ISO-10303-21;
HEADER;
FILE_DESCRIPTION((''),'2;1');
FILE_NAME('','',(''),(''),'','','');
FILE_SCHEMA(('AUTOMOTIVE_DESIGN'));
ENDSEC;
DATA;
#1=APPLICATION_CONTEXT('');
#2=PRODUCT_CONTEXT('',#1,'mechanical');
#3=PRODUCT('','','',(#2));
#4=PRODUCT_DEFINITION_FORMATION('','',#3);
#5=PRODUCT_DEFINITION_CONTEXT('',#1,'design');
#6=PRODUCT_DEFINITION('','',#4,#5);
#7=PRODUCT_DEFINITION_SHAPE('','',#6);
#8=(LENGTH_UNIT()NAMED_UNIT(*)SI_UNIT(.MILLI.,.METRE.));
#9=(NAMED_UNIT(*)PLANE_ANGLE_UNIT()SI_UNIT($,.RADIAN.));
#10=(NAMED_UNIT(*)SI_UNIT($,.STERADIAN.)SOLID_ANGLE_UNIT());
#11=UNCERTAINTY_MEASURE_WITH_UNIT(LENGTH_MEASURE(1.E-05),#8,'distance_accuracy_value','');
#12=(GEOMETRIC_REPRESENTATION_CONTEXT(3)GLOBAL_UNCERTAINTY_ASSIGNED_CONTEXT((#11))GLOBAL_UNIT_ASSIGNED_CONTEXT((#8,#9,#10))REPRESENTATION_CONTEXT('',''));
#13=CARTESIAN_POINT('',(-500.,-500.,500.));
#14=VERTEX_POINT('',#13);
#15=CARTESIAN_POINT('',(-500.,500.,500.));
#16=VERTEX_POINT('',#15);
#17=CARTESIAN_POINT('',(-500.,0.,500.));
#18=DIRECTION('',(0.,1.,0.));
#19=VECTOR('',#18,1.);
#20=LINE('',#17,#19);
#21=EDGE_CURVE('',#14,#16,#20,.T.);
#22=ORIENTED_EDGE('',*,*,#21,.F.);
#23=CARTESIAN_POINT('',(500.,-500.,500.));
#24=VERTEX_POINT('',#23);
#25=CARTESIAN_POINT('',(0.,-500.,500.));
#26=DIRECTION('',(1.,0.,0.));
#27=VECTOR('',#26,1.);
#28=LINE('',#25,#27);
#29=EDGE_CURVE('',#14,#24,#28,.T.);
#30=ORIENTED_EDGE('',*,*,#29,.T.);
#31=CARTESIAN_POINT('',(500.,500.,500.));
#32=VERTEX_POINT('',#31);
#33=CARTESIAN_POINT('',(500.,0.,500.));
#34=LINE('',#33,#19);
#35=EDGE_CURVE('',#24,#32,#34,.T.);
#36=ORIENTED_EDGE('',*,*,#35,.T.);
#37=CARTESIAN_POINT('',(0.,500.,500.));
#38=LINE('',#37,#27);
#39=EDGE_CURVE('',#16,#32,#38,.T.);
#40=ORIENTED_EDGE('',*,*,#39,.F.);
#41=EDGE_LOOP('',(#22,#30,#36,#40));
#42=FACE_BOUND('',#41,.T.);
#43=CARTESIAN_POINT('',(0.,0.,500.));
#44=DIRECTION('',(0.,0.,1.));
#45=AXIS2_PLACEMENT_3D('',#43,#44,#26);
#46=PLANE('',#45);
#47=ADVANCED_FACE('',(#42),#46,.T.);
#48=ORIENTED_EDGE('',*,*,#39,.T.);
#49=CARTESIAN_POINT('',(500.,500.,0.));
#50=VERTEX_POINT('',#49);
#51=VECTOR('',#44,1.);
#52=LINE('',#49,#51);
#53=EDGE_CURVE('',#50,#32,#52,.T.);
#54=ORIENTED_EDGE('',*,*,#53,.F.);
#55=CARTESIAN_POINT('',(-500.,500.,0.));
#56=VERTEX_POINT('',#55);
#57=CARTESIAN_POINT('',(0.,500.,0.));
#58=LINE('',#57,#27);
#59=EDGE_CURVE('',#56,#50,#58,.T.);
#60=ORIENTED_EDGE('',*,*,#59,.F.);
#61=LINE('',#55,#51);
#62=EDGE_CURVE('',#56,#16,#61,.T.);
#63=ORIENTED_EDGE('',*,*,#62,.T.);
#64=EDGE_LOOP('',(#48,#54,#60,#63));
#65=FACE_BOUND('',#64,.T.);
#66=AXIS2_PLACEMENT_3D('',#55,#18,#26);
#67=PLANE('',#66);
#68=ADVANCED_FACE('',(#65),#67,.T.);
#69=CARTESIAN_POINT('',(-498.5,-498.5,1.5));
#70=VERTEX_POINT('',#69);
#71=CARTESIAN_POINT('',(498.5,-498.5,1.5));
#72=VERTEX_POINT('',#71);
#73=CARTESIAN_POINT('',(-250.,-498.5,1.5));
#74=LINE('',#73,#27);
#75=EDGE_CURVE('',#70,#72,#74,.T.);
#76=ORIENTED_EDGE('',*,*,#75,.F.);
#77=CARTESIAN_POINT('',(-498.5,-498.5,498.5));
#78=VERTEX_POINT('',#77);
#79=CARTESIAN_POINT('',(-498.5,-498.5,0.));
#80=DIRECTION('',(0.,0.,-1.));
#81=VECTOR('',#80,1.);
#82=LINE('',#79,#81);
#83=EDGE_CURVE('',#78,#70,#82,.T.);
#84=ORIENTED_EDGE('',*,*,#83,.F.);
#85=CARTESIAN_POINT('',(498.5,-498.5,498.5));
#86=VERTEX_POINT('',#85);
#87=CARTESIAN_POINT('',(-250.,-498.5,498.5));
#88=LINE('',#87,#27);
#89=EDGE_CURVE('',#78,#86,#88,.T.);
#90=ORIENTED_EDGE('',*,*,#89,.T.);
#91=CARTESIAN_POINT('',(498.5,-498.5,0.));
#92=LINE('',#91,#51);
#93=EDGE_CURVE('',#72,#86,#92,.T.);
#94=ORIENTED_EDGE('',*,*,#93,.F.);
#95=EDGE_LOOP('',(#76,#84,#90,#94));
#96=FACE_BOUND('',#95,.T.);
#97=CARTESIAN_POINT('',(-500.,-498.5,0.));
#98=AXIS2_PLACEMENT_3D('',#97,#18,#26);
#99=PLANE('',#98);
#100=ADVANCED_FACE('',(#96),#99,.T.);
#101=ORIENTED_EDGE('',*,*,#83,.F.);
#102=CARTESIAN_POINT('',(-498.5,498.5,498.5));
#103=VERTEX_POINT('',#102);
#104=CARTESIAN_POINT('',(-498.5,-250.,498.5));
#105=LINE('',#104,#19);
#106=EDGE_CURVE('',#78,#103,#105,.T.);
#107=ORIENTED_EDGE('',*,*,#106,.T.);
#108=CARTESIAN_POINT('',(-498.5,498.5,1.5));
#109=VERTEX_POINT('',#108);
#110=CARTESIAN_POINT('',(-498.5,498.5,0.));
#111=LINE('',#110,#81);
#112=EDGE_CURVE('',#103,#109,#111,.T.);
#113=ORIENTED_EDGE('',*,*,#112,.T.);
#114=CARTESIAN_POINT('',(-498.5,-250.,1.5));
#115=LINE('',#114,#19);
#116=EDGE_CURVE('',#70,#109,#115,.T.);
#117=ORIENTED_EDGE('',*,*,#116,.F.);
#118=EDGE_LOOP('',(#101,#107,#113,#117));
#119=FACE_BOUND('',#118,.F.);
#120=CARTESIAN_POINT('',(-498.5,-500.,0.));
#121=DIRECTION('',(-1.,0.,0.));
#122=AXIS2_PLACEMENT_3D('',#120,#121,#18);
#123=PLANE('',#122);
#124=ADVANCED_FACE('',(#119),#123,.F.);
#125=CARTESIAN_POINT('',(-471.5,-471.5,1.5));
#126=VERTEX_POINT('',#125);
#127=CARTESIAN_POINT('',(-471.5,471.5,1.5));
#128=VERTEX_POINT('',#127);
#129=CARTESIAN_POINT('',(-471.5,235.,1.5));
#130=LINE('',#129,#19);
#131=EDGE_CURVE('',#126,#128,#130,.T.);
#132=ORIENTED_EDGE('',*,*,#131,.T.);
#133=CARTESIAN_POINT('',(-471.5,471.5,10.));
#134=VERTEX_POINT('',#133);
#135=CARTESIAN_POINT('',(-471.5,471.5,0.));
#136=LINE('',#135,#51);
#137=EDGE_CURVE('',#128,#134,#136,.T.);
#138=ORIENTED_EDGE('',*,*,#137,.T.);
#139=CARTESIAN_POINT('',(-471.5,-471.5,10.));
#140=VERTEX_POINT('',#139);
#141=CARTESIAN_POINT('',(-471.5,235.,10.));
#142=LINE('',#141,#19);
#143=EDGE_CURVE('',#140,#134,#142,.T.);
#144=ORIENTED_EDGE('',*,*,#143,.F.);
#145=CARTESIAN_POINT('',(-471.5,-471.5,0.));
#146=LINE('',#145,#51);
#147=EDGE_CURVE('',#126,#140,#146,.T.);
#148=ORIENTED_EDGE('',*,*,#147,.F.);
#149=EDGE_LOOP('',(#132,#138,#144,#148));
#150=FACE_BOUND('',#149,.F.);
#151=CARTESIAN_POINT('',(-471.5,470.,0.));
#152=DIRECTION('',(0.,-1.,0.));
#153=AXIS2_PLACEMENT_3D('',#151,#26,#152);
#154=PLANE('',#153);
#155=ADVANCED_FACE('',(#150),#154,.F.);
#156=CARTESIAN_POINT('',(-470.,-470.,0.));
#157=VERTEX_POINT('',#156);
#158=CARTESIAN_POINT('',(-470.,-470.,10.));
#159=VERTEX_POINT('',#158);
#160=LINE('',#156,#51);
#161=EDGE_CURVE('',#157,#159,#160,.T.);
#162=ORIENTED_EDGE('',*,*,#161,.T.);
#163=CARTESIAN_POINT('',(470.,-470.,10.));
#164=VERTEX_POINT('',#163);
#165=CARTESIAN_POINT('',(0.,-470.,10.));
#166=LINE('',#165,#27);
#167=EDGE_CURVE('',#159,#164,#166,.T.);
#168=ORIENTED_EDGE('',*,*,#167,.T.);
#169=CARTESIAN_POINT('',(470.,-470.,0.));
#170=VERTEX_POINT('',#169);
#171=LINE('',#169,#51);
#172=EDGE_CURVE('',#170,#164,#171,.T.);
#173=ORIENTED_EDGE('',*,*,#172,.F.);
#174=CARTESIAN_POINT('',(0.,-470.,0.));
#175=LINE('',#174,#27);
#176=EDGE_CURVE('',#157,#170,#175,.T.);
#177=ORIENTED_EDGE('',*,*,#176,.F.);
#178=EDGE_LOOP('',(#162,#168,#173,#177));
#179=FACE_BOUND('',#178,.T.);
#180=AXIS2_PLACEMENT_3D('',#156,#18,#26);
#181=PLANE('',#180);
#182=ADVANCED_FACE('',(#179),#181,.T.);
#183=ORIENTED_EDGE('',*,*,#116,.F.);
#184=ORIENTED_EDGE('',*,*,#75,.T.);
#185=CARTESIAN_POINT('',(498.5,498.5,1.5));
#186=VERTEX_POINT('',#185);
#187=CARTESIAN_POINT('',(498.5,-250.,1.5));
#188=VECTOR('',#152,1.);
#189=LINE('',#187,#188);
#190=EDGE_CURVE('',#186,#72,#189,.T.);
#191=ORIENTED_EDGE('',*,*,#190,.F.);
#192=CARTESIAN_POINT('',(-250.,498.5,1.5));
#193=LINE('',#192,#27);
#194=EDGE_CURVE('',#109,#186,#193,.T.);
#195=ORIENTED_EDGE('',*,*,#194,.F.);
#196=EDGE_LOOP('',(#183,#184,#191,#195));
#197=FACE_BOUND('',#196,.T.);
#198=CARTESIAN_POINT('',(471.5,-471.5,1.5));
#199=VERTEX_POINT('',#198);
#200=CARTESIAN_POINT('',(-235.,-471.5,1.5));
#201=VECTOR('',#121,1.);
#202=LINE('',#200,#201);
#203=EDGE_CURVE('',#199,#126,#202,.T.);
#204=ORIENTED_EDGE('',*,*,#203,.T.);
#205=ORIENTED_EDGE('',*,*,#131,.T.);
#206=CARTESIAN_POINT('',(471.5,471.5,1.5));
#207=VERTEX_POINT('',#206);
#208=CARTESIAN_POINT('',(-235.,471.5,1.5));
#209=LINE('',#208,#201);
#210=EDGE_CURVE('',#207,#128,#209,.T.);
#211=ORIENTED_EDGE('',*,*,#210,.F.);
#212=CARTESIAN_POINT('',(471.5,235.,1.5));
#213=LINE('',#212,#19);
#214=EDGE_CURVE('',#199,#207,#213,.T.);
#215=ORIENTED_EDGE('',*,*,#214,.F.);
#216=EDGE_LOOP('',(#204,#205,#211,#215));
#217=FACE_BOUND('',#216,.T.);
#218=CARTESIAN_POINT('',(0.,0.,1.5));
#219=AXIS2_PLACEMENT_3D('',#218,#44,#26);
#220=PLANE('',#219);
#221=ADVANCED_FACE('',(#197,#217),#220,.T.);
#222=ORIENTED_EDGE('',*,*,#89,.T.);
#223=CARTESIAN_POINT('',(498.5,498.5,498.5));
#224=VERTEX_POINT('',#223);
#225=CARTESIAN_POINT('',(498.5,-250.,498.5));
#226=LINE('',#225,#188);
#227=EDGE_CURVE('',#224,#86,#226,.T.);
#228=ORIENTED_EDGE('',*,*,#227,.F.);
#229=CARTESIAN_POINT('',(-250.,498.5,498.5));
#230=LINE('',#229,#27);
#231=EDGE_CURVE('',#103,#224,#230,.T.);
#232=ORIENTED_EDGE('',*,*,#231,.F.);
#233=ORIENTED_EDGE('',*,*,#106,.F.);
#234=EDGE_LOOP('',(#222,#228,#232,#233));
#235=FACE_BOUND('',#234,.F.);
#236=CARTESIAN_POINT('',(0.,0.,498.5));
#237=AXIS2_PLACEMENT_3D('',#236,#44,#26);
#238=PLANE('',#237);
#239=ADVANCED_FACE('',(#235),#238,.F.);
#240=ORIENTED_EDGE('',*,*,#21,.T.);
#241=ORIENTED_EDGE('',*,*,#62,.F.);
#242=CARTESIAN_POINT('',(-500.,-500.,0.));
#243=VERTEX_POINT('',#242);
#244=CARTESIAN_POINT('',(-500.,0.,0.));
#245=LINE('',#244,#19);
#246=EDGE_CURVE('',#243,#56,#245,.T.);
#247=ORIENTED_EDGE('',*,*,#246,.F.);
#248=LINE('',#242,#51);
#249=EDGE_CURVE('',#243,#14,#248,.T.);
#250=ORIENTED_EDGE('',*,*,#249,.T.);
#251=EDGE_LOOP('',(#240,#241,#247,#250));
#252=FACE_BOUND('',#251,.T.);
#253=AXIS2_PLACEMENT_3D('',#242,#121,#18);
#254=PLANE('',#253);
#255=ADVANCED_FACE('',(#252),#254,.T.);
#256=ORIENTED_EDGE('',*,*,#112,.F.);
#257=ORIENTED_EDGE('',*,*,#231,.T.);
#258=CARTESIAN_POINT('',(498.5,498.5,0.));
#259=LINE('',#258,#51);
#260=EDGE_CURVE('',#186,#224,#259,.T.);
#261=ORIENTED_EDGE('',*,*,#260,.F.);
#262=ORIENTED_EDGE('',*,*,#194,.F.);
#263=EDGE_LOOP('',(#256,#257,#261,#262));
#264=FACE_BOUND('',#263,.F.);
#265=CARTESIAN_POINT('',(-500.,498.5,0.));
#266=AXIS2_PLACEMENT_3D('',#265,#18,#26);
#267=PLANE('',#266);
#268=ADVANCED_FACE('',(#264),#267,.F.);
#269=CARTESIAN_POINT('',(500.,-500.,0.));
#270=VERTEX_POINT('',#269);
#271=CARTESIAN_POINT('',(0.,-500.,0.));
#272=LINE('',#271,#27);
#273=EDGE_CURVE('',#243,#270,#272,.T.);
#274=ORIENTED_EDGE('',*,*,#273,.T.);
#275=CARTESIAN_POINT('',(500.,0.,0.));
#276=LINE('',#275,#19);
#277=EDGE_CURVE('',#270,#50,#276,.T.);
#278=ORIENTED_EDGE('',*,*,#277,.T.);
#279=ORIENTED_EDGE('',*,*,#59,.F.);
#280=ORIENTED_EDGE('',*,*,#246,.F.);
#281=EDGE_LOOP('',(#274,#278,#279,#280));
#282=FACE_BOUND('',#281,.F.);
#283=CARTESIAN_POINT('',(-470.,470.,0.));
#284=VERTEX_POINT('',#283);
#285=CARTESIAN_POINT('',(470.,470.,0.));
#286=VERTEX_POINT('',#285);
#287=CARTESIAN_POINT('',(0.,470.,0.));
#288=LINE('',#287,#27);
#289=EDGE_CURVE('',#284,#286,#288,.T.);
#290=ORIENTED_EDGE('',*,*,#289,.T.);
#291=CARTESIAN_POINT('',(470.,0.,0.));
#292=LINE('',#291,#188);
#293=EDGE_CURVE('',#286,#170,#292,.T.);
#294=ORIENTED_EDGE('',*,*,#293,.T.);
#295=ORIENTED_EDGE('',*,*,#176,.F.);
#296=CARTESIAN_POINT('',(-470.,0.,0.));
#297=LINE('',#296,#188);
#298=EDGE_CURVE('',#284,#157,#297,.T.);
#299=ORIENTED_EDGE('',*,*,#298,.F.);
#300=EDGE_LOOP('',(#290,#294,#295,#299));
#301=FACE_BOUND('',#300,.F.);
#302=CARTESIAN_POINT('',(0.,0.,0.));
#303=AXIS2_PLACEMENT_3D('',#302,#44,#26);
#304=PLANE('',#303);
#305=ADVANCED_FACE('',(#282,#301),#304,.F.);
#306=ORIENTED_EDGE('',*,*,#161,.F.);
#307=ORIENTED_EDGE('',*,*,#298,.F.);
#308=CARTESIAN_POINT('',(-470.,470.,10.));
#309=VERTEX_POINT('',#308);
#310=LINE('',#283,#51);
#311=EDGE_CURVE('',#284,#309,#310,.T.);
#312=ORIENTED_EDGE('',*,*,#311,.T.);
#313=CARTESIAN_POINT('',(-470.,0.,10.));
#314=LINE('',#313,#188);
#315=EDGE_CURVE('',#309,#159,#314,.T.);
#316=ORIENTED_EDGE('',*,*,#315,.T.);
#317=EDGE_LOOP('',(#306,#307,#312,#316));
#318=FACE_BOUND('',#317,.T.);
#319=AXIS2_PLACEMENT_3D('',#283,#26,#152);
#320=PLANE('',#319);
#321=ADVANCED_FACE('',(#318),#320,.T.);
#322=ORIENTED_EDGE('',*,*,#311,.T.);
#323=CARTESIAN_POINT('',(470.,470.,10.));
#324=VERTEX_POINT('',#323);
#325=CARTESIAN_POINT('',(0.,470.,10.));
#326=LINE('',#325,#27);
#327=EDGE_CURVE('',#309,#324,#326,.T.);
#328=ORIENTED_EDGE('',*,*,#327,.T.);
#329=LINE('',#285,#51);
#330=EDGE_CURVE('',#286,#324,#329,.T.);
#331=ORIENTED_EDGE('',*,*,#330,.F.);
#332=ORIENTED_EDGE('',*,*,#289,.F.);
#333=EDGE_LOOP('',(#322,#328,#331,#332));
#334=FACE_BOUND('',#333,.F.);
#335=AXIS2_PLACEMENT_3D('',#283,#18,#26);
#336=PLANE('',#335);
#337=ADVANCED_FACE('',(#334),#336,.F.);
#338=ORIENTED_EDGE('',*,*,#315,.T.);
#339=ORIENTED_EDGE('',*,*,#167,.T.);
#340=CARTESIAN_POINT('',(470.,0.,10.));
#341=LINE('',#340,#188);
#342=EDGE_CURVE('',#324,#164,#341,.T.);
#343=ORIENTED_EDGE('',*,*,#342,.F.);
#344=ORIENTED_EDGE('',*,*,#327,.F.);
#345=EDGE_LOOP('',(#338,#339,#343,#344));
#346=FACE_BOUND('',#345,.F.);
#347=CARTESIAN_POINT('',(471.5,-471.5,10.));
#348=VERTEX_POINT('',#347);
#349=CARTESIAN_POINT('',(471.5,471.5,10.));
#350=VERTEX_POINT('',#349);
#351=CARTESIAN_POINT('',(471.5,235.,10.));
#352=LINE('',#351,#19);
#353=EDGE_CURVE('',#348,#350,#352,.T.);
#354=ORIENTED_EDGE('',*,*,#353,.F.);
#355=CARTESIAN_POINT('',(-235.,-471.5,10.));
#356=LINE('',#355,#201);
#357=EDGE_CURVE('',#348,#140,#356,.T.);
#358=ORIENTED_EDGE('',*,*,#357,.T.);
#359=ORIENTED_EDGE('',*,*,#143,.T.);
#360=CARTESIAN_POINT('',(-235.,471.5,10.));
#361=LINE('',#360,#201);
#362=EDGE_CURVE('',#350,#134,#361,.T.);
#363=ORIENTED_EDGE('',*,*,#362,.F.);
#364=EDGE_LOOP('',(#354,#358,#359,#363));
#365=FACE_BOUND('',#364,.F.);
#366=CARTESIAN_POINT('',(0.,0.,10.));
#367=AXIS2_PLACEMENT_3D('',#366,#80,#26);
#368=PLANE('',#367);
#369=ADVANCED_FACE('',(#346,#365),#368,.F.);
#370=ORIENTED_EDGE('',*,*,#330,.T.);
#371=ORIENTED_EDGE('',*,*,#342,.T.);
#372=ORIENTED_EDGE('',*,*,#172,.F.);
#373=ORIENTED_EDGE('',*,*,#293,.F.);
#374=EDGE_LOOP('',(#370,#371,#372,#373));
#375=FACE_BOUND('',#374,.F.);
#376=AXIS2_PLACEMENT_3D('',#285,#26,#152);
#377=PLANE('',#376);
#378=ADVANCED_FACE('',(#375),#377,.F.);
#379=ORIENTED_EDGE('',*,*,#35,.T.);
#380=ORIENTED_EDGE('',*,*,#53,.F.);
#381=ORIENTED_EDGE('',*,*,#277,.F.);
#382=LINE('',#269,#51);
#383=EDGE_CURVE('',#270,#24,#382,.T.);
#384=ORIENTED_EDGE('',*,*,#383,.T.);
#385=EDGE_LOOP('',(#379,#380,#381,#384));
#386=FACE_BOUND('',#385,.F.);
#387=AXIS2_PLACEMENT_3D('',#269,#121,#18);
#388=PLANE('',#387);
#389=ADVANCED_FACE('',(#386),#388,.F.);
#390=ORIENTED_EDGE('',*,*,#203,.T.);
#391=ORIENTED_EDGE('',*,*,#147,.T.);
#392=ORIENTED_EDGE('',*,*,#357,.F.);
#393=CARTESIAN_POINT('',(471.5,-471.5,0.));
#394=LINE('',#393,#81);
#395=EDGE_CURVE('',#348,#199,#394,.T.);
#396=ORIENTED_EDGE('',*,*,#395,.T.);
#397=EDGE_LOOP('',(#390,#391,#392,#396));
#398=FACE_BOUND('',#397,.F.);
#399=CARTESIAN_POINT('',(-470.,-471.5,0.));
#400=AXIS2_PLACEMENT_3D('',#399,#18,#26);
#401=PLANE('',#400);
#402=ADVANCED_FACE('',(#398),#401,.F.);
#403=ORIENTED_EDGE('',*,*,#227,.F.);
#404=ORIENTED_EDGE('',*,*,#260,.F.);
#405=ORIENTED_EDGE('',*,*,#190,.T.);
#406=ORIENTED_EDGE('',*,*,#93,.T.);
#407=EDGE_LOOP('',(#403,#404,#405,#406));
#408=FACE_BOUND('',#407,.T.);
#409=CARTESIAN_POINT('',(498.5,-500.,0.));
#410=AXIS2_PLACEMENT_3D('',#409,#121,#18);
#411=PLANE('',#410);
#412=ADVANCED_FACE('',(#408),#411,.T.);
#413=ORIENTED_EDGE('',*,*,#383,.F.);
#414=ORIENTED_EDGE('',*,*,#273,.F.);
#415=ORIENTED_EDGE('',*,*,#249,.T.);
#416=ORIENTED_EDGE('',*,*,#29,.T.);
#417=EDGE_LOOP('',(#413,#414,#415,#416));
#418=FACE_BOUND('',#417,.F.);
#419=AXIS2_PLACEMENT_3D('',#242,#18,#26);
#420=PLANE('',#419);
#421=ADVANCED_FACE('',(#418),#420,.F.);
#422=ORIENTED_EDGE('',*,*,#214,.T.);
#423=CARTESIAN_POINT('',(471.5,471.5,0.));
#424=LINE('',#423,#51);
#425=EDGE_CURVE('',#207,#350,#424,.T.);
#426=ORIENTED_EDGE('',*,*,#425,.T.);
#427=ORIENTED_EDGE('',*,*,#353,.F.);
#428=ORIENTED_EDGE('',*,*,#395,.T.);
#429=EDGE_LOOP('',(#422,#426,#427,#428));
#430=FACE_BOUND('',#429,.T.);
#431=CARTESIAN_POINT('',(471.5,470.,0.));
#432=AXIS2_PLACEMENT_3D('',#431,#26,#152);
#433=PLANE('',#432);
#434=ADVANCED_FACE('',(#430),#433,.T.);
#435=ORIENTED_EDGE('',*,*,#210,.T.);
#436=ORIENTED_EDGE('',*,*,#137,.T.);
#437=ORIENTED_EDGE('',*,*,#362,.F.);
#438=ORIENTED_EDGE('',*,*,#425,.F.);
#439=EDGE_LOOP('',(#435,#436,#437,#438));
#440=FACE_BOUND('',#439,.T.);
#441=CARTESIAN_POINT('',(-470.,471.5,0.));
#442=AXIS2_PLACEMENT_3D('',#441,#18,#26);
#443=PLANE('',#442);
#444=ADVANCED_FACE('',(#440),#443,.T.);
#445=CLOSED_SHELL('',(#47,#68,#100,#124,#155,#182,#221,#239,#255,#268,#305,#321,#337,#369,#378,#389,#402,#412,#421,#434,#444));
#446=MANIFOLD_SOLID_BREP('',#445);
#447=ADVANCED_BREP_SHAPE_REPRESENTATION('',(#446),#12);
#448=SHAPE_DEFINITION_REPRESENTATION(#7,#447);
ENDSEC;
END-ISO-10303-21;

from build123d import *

# Parameters (mm, degrees)
F0_W     = 1000
F0_H     = 1000
F1_DEPTH = 500
F2_W     = 940
F2_H     = 940
F3_DEPTH = 10
F4_T     = -1.5


# Not quite as in the source:
# - a shell that OpenCascade refuses in one call is made with other operations: the cavity is built on its own and cut out


with BuildPart() as f1:
    # F0 (on Top) → F1 (new body)
    with BuildSketch(Plane.XY):
        Rectangle(F0_W, F0_H)
    extrude(amount=F1_DEPTH)

    # F2 (on face) → F3 (cut)
    with BuildSketch(Plane(origin=(0, 0, 0), x_dir=(1, 0, 0), z_dir=(0, 0, -1))):
        Rectangle(F2_W, F2_H)
    extrude(amount=-F3_DEPTH, mode=Mode.SUBTRACT)

    # F4: a shell. OpenCascade refuses it in one call, so the cavity is built on its own and cut out:
    # the body offset inwards by the wall thickness, plus a prism from it out through each open face.
    f4_core = offset(f1.part, amount=F4_T, kind=Kind.INTERSECTION, mode=Mode.PRIVATE)
    f4_exits = [f4_core.faces().sort_by_distance(p)[0] for p in [
        (0, 0, 11.5),
    ]]
    add(f4_core, mode=Mode.SUBTRACT)
    extrude(f4_exits, amount=-F4_T, mode=Mode.SUBTRACT)


solid = f1.part
